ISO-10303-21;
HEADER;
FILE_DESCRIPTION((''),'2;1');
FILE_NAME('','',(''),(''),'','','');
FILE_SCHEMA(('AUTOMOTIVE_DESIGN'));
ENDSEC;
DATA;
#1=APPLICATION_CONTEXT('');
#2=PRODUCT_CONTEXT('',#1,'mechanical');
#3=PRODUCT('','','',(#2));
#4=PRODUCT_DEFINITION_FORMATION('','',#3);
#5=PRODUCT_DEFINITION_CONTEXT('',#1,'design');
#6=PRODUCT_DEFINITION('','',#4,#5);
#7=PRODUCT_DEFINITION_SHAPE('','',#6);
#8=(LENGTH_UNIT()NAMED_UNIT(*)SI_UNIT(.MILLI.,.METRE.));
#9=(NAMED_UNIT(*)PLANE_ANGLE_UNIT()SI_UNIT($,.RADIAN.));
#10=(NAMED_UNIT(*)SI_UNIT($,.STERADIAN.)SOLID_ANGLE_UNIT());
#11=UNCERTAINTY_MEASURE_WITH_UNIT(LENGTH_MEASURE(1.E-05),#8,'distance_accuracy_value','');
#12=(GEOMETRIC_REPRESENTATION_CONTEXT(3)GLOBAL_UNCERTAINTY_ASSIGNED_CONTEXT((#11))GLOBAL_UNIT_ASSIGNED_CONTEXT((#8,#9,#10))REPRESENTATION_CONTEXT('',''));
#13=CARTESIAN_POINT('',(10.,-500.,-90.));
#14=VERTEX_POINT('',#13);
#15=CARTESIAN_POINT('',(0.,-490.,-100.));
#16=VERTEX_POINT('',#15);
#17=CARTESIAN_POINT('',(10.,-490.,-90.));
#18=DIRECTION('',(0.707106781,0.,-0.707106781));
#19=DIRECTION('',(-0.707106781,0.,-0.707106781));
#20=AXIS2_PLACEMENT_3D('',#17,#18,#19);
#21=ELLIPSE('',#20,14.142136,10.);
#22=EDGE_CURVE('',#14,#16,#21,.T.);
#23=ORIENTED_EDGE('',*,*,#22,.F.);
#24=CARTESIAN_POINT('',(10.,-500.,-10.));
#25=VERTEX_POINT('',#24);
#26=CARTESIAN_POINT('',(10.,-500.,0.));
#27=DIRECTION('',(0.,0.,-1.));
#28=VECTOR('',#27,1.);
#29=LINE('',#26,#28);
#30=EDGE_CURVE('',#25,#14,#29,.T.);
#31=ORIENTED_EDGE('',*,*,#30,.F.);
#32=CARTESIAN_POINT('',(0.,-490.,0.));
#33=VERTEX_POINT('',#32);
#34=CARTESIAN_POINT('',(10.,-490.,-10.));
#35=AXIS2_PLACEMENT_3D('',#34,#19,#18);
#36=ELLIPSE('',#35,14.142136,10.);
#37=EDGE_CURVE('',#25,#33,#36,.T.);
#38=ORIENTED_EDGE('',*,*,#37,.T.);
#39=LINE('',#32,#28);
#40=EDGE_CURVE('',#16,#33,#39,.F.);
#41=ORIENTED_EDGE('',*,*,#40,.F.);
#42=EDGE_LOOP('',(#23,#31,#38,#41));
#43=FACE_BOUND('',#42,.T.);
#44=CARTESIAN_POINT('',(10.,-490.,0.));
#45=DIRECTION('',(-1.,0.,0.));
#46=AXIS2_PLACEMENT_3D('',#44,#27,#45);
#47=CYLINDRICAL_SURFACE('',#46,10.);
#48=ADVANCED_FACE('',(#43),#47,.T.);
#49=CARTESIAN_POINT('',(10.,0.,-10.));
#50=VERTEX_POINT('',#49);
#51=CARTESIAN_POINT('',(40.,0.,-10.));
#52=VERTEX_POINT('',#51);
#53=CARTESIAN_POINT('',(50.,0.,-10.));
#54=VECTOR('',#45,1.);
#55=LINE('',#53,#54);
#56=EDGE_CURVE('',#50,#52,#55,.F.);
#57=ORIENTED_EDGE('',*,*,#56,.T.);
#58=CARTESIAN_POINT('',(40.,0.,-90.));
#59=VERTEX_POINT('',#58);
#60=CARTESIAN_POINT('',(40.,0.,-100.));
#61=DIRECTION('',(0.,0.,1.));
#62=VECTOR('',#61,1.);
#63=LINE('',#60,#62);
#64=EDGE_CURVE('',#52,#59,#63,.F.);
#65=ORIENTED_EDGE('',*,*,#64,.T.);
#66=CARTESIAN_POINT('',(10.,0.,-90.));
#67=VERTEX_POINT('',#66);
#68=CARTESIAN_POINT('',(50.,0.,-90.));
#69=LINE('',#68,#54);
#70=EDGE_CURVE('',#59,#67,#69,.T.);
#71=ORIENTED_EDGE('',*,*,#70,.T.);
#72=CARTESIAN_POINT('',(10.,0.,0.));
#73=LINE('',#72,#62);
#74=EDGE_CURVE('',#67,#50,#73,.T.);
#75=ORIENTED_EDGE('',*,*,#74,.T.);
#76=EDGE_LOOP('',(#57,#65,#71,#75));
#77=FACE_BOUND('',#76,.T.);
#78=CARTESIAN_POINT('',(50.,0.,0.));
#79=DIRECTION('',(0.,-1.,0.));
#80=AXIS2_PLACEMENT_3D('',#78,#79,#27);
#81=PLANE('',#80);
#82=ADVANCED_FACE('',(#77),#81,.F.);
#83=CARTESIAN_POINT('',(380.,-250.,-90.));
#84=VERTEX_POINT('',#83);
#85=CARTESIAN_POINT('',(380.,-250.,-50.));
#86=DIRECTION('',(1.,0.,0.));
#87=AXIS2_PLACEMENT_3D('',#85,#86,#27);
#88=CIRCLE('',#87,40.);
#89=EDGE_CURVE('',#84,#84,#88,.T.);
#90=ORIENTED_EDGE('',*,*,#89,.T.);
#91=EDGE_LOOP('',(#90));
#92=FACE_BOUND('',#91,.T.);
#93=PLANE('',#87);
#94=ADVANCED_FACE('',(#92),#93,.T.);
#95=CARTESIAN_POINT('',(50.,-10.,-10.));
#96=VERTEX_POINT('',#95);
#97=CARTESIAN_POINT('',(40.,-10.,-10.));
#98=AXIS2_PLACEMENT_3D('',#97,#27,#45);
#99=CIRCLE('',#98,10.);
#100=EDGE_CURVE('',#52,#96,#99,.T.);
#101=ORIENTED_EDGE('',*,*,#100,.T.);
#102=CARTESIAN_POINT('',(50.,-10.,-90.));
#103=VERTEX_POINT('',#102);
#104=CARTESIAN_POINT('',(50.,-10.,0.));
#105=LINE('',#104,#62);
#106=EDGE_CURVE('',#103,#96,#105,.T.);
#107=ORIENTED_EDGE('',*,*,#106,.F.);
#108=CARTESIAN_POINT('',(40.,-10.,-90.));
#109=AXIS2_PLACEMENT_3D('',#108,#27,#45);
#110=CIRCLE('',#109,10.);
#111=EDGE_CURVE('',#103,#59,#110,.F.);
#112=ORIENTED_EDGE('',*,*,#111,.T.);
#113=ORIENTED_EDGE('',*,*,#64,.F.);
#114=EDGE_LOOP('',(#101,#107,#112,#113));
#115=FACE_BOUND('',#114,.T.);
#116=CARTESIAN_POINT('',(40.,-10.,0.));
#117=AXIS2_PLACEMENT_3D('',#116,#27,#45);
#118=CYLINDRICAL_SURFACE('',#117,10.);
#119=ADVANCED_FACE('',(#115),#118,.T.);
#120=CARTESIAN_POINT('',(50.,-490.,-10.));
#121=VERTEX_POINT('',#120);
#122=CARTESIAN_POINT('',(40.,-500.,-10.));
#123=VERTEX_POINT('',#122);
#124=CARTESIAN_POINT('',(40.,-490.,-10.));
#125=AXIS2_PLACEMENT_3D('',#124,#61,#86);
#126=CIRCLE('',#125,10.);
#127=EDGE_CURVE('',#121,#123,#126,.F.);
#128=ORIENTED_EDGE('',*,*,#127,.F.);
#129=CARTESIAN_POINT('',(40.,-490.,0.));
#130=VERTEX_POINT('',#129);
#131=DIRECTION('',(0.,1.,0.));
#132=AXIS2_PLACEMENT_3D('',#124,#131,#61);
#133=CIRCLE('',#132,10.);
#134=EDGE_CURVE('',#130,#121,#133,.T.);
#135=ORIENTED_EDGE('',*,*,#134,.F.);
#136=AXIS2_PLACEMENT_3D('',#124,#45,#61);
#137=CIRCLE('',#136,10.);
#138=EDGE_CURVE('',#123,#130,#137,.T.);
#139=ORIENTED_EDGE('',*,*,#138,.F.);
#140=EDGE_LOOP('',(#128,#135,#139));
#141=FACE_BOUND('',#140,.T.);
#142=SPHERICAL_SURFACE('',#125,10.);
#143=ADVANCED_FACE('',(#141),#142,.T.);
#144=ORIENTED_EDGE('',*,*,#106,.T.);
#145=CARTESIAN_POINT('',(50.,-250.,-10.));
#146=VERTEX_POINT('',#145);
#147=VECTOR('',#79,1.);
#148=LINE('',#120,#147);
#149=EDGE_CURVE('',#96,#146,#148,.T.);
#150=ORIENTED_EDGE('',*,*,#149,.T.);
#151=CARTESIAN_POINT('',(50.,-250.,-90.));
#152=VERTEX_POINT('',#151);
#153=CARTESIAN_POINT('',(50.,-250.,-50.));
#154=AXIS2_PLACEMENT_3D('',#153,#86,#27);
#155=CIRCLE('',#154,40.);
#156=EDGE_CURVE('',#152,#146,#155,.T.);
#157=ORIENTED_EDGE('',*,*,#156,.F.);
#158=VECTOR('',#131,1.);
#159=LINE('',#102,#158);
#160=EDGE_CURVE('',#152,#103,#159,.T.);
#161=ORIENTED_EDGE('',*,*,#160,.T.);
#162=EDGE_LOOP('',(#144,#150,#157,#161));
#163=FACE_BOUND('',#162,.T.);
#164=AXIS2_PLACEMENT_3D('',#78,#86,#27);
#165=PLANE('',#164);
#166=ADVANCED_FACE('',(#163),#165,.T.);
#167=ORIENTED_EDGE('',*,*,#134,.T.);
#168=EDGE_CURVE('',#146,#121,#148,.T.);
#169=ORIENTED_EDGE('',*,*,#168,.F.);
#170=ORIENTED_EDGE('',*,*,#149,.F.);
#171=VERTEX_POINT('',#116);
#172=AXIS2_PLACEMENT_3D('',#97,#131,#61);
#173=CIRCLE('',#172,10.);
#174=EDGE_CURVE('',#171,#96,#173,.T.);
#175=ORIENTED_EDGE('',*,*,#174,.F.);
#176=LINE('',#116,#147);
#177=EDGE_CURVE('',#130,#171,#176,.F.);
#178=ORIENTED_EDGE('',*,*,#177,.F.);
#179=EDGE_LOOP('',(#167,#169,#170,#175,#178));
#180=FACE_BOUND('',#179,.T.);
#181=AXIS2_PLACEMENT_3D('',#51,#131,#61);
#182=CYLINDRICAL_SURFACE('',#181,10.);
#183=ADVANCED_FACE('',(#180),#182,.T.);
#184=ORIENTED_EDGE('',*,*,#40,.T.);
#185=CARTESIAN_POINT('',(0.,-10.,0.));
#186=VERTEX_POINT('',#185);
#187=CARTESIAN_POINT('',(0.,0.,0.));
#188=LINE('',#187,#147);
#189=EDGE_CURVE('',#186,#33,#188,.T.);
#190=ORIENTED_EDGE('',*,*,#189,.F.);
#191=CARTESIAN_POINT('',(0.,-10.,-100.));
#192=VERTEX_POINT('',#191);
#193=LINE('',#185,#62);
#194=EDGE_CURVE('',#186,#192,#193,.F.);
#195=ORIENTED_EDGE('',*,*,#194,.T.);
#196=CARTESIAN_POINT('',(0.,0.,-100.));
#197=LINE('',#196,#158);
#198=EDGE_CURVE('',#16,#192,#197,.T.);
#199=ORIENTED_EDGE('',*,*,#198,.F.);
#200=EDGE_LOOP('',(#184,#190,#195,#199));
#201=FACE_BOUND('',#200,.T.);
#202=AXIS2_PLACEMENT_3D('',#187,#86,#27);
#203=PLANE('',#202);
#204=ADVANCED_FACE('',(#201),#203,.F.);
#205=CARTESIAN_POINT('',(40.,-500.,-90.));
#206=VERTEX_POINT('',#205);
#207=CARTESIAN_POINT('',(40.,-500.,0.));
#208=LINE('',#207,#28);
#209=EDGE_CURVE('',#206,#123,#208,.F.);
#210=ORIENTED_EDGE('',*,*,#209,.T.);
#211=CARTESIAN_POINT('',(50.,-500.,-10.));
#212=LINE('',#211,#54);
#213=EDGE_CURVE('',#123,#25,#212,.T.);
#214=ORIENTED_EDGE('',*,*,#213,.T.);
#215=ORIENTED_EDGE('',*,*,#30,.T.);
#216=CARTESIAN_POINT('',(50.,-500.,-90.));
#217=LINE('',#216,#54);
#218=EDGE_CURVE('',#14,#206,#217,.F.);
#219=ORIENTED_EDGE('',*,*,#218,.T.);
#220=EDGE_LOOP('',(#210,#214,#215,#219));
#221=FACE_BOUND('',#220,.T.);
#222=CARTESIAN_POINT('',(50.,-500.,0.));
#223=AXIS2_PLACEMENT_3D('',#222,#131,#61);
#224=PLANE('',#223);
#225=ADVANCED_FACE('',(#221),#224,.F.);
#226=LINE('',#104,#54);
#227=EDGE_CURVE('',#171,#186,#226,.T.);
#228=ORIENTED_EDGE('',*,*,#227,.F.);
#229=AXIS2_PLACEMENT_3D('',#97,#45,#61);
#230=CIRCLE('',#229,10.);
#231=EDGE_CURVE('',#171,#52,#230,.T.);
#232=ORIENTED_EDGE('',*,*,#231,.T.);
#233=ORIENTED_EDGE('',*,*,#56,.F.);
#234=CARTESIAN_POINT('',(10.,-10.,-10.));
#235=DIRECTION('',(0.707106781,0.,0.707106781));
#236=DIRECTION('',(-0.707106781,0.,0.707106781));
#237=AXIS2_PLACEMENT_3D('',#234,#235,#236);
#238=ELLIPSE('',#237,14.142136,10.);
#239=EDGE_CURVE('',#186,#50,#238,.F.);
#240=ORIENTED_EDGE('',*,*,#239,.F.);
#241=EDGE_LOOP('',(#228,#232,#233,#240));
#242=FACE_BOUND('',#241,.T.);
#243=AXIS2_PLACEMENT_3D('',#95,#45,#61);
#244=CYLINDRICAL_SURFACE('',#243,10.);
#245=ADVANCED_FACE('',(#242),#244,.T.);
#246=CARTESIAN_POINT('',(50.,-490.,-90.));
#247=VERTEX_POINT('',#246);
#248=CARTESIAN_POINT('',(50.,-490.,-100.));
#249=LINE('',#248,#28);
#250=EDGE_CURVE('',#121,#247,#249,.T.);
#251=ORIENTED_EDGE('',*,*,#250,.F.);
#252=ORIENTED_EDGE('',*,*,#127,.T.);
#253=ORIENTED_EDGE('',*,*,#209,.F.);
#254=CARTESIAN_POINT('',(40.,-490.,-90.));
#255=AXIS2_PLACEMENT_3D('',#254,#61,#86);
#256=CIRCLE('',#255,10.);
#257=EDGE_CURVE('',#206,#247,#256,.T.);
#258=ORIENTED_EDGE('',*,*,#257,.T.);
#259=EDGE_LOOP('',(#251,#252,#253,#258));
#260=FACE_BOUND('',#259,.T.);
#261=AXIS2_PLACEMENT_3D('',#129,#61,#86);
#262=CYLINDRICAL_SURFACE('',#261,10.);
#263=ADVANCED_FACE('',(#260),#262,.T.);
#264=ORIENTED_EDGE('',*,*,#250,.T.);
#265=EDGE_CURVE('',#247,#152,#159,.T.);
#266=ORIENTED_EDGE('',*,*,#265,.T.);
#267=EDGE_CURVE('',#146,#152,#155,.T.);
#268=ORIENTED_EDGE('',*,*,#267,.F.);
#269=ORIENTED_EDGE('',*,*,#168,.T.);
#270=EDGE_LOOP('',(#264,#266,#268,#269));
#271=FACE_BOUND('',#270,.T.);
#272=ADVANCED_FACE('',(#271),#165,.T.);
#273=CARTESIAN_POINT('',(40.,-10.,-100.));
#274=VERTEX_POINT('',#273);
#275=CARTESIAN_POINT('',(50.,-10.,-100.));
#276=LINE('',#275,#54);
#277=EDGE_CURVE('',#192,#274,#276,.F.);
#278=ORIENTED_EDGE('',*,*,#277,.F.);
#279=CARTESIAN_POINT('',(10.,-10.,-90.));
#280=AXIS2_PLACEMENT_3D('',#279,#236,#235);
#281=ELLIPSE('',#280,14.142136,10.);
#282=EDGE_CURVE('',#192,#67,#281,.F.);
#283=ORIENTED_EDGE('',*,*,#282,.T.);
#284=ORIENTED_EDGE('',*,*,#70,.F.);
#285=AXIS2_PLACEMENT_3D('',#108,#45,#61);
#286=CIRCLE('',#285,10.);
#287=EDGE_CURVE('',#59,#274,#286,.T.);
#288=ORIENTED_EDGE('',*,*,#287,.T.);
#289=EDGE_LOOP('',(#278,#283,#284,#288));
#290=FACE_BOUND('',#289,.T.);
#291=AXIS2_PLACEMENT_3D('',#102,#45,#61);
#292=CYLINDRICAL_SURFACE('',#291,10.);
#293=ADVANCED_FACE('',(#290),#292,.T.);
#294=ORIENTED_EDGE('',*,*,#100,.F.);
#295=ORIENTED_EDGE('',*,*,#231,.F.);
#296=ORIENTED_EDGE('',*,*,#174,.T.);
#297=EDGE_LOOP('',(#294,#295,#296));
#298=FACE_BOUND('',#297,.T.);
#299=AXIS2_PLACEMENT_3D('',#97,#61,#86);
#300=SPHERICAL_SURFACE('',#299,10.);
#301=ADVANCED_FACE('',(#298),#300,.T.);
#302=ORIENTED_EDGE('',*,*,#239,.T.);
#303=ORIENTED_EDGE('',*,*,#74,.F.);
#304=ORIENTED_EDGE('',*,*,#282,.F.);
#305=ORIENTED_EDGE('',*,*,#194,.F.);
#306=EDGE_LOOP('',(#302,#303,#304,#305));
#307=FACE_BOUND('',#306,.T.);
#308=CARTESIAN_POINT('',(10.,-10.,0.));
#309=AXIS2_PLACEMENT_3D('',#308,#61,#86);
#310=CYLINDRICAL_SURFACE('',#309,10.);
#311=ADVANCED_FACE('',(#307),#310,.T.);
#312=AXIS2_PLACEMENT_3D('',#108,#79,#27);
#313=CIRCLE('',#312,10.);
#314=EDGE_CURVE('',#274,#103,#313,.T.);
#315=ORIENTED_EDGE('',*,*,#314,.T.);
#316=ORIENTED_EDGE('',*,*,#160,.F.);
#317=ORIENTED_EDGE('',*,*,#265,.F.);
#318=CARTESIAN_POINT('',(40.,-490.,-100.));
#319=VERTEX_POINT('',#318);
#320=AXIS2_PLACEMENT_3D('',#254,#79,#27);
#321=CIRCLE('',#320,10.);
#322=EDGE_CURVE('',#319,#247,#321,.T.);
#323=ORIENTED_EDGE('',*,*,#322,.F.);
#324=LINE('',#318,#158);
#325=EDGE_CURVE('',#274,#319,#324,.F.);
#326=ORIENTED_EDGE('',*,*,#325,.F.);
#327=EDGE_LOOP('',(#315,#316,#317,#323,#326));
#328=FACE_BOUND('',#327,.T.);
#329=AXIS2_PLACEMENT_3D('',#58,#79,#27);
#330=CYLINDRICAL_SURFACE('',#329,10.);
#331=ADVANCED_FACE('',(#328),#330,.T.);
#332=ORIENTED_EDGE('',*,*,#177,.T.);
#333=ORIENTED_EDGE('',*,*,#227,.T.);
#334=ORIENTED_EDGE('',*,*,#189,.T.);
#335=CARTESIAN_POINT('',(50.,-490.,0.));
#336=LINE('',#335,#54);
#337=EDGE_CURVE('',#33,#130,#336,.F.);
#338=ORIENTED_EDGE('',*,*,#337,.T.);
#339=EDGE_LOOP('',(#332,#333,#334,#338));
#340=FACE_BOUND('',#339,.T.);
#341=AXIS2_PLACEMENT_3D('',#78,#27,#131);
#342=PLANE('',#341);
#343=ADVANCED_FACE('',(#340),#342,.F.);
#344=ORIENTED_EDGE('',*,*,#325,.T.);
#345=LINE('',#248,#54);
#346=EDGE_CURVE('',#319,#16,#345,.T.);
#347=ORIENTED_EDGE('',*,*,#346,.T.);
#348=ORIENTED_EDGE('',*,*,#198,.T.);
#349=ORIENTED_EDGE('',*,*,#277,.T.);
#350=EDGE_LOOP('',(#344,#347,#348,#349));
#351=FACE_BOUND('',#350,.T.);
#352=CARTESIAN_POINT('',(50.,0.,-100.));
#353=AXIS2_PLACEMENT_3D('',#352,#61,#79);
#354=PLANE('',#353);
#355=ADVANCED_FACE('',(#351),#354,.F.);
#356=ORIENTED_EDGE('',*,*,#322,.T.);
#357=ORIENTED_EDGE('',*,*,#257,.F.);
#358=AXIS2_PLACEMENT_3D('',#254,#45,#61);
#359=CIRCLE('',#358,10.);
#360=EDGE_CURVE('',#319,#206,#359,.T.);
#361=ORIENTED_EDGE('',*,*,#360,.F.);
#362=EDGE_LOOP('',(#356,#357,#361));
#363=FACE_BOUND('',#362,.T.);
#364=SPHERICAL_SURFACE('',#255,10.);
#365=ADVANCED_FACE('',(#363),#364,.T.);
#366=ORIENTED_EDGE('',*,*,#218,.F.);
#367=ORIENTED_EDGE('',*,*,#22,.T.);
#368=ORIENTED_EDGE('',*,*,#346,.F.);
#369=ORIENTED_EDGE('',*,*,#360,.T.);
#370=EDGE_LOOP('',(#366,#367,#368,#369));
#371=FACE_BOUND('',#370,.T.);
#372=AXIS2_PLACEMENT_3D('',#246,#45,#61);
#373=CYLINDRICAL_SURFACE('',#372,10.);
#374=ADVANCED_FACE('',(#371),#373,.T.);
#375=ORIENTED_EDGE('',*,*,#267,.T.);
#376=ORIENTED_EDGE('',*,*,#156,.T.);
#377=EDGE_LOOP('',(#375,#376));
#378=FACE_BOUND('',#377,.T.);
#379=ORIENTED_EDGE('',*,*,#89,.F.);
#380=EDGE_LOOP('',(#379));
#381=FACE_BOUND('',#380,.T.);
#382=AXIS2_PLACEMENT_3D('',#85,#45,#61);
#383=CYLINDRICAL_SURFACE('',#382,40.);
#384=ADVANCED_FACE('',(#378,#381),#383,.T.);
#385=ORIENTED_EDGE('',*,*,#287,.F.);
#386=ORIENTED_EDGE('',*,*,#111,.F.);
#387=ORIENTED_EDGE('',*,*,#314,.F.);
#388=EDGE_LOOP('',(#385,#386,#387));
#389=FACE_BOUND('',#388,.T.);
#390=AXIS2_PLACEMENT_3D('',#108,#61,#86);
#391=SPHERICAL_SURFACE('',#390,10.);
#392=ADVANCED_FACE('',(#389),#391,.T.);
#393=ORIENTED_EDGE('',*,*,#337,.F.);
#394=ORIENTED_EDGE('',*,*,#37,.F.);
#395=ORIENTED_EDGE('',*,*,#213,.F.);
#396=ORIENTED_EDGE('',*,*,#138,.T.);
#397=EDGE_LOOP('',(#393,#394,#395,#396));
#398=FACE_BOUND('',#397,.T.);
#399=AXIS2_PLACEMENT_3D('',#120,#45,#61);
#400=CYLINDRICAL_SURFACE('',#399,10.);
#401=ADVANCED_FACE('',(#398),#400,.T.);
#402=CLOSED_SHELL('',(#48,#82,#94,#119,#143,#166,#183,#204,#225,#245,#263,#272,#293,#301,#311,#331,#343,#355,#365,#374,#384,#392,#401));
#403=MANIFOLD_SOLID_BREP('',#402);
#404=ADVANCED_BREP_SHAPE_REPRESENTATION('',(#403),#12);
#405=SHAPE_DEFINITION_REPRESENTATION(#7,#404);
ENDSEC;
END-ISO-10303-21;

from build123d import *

# Parameters (mm, degrees)
SKETCH1_W           = 100
SKETCH1_H           = 500
BOSS_EXTRUDE1_DEPTH = 50
FILLET1_R           = 10
FILLET2_R           = 10
SKETCH2_R           = 40
BOSS_EXTRUDE2_DEPTH = 330


with BuildPart() as part:
    # Sketch1 → Boss-Extrude1 (new body)
    with BuildSketch(Plane(origin=(0, 0, 0), x_dir=(0, 0, -1), z_dir=(1, 0, 0))):
        with Locations((50, -250)):
            Rectangle(SKETCH1_W, SKETCH1_H)
    extrude(amount=BOSS_EXTRUDE1_DEPTH)

    # Fillet1
    fillet1_edges = [part.edges().sort_by_distance(p)[0] for p in [
        (50, 0, -50),
        (0, 0, -50),
        (0, -500, -50),
        (25, 0, 0),
        (25, 0, -100),
        (25, -500, -100),
        (25, -500, 0),
        (50, -500, -50),
    ]]
    fillet(fillet1_edges, radius=FILLET1_R)

    # Fillet2
    # the kernel refuses this fillet: 10 mm, written as the material it takes off along each edge
    with BuildSketch(Plane(origin=(40, -10, -10), x_dir=(0, 0, 1), z_dir=(1, 0, 0))) as fillet2_piece_1_section:
        Polygon((0, 0), (FILLET2_R, 0), (FILLET2_R, -FILLET2_R), (0, -FILLET2_R), align=None)
    fillet2_piece_1 = extrude(amount=FILLET2_R, mode=Mode.PRIVATE)
    fillet2_piece_1 = fillet2_piece_1 - Plane(origin=(40, -10, -10), x_dir=(0, -0.7071067811865475, -0.7071067811865476), z_dir=(1, 0, 0)) * Sphere(FILLET2_R, mode=Mode.PRIVATE)
    add(fillet2_piece_1, mode=Mode.SUBTRACT)
    with BuildSketch(Plane(origin=(40, -10, -90), x_dir=(0, 0, -1), z_dir=(1, 0, 0))) as fillet2_piece_2_section:
        Polygon((0, 0), (FILLET2_R, 0), (FILLET2_R, FILLET2_R), (0, FILLET2_R), align=None)
    fillet2_piece_2 = extrude(amount=FILLET2_R, mode=Mode.PRIVATE)
    fillet2_piece_2 = fillet2_piece_2 - Plane(origin=(40, -10, -90), x_dir=(0, -0.7071067811865477, 0.7071067811865475), z_dir=(1, 0, 0)) * Sphere(FILLET2_R, mode=Mode.PRIVATE)
    add(fillet2_piece_2, mode=Mode.SUBTRACT)
    with BuildSketch(Plane(origin=(40, -490, -10), x_dir=(0, 0, 1), z_dir=(1, 0, 0))) as fillet2_piece_3_section:
        Polygon((0, 0), (FILLET2_R, 0), (FILLET2_R, FILLET2_R), (0, FILLET2_R), align=None)
    fillet2_piece_3 = extrude(amount=FILLET2_R, mode=Mode.PRIVATE)
    fillet2_piece_3 = fillet2_piece_3 - Plane(origin=(40, -490, -10), x_dir=(0, 0.7071067811865477, -0.7071067811865475), z_dir=(1, 0, 0)) * Sphere(FILLET2_R, mode=Mode.PRIVATE)
    add(fillet2_piece_3, mode=Mode.SUBTRACT)
    with BuildSketch(Plane(origin=(40, -490, -90), x_dir=(0, 0, -1), z_dir=(1, 0, 0))) as fillet2_piece_4_section:
        Polygon((0, 0), (FILLET2_R, 0), (FILLET2_R, -FILLET2_R), (0, -FILLET2_R), align=None)
    fillet2_piece_4 = extrude(amount=FILLET2_R, mode=Mode.PRIVATE)
    fillet2_piece_4 = fillet2_piece_4 - Plane(origin=(40, -490, -90), x_dir=(0, 0.7071067811865475, 0.7071067811865476), z_dir=(1, 0, 0)) * Sphere(FILLET2_R, mode=Mode.PRIVATE)
    add(fillet2_piece_4, mode=Mode.SUBTRACT)
    with BuildSketch(Plane(origin=(50, -10, -100), x_dir=(0, 0, 1), z_dir=(0, -1, 0)), Plane(origin=(50, -490, 0), x_dir=(0, 0, -1), z_dir=(0, 1, 0))) as fillet2_piece_5:
        with BuildLine():
            CenterArc((FILLET2_R, FILLET2_R), FILLET2_R, 180, 90)
            Line((0, FILLET2_R), (0, 0))
            Line((0, 0), (FILLET2_R, 0))
        make_face()
    extrude(amount=480, mode=Mode.SUBTRACT)

    # Sketch2 → Boss-Extrude2 (add)
    with BuildSketch(Plane(origin=(50, 0, 0), x_dir=(0, 0, -1), z_dir=(1, 0, 0))):
        with Locations((50, -250)):
            Circle(SKETCH2_R)
    extrude(amount=BOSS_EXTRUDE2_DEPTH)


solid = part.part
